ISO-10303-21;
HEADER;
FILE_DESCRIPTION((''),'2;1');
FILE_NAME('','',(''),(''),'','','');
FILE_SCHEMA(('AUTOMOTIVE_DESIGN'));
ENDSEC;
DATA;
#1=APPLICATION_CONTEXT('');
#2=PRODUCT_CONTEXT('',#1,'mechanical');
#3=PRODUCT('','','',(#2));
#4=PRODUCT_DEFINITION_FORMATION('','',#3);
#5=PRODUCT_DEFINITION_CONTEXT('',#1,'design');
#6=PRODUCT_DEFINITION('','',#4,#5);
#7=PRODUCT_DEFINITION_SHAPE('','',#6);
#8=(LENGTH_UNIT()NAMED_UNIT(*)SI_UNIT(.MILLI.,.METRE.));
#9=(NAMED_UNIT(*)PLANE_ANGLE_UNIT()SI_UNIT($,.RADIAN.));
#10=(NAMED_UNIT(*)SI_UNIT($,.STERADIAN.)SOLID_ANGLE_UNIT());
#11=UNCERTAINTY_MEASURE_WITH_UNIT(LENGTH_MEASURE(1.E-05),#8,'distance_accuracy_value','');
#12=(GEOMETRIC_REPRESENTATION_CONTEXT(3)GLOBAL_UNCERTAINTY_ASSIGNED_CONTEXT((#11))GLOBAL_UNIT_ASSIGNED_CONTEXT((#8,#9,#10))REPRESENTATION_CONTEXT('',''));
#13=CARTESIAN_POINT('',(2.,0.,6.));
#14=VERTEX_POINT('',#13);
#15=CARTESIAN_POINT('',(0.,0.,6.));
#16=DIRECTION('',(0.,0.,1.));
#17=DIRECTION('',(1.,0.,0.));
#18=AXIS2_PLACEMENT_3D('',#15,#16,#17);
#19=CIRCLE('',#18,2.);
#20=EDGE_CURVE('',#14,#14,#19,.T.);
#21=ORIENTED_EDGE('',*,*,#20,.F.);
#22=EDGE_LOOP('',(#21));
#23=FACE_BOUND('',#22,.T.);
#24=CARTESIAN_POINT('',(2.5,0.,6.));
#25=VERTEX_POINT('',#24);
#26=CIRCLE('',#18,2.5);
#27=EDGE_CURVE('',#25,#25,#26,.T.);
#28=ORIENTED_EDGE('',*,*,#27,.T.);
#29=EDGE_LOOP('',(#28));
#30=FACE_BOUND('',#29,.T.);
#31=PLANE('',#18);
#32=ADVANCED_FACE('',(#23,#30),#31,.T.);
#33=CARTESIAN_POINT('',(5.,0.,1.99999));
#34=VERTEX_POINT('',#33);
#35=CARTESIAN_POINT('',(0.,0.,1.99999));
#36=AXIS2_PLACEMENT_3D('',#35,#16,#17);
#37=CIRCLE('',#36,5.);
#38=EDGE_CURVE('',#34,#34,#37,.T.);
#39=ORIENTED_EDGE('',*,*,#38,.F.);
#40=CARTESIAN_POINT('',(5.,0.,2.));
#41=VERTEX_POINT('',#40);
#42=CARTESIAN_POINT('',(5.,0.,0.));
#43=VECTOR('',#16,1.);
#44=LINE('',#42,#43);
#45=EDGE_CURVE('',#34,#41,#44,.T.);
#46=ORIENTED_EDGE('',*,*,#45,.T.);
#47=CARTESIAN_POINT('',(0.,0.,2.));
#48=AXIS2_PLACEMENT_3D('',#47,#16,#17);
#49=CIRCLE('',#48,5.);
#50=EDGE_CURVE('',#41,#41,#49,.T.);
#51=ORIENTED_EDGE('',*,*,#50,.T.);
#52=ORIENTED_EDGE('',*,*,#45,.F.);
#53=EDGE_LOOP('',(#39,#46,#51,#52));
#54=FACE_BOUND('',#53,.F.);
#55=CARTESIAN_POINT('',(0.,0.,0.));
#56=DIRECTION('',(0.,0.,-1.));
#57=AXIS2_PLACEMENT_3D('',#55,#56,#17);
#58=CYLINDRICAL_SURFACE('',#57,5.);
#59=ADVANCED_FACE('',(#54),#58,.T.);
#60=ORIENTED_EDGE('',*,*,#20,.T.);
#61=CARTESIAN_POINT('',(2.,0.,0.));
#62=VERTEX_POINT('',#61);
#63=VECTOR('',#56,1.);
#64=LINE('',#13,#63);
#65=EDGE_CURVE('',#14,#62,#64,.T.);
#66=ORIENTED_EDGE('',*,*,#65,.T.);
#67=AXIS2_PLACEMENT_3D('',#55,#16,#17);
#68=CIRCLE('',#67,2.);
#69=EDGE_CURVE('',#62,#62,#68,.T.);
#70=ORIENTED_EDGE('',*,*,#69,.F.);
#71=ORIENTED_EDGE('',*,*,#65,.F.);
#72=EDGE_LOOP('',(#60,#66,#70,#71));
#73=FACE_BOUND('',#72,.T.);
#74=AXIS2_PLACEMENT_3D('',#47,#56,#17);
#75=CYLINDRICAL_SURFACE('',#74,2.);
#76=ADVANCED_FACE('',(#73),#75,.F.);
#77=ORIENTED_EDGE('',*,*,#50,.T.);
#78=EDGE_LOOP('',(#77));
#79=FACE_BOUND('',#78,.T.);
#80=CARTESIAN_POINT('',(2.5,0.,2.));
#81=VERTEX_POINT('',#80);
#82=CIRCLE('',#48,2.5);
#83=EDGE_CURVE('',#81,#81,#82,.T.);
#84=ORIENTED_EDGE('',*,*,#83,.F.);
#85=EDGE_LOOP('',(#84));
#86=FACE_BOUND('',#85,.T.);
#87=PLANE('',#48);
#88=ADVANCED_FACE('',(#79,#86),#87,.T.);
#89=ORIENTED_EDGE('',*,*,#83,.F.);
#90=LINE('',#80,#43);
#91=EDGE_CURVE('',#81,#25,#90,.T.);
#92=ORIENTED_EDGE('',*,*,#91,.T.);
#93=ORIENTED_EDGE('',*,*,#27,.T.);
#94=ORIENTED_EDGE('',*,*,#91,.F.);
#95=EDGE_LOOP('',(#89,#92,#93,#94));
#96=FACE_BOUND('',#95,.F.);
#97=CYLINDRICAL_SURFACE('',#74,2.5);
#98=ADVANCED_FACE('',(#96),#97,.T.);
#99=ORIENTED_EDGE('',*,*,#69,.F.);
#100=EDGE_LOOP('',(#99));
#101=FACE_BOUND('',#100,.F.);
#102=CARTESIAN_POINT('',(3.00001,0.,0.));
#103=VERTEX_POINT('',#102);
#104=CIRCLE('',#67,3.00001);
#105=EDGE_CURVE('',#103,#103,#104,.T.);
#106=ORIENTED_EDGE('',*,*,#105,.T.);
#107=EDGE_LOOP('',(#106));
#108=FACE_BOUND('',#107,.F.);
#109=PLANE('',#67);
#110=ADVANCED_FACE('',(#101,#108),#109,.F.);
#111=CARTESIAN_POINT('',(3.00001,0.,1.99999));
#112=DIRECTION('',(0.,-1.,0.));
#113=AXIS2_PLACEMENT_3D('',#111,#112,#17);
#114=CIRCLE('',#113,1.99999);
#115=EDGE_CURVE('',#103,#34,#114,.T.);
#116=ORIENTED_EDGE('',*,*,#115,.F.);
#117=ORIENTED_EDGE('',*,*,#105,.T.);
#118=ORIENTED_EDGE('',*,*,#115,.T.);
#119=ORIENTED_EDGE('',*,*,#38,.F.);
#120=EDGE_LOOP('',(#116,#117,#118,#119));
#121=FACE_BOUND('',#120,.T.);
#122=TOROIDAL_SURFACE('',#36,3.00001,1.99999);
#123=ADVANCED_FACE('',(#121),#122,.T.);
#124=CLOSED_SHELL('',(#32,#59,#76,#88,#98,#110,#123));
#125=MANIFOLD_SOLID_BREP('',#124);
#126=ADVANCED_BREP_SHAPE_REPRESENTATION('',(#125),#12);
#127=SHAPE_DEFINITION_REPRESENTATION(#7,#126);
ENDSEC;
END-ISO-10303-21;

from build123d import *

# Parameters (mm, degrees)
F0_R     = 5
F0_R_2   = 2
F2_DEPTH = 2
F3_R     = 2.5
F3_R_2   = 2
F4_DEPTH = 4
F5_R     = 1.99999


# Not quite as in the source:
# - a fillet or chamfer is up to 0.001 mm smaller than in the source, because OpenCascade refuses the exact size


with BuildPart() as f2:
    # F0 (on Top) → F2 (new body)
    with BuildSketch(Plane.XY):
        Circle(F0_R)
        Circle(F0_R_2, mode=Mode.SUBTRACT)
    extrude(amount=F2_DEPTH)

    # F3 (on face) → F4 (join)
    with BuildSketch(Plane.XY.offset(2)):
        Circle(F3_R)
        Circle(F3_R_2, mode=Mode.SUBTRACT)
    extrude(amount=F4_DEPTH)

    # F5 (radius 2 in the source; OpenCascade refuses exactly that, so slightly less here)
    f5_edges = [f2.edges().sort_by_distance(p)[0] for p in [
        (-5, 0, 0),
    ]]
    fillet(f5_edges, radius=F5_R)


solid = f2.part
